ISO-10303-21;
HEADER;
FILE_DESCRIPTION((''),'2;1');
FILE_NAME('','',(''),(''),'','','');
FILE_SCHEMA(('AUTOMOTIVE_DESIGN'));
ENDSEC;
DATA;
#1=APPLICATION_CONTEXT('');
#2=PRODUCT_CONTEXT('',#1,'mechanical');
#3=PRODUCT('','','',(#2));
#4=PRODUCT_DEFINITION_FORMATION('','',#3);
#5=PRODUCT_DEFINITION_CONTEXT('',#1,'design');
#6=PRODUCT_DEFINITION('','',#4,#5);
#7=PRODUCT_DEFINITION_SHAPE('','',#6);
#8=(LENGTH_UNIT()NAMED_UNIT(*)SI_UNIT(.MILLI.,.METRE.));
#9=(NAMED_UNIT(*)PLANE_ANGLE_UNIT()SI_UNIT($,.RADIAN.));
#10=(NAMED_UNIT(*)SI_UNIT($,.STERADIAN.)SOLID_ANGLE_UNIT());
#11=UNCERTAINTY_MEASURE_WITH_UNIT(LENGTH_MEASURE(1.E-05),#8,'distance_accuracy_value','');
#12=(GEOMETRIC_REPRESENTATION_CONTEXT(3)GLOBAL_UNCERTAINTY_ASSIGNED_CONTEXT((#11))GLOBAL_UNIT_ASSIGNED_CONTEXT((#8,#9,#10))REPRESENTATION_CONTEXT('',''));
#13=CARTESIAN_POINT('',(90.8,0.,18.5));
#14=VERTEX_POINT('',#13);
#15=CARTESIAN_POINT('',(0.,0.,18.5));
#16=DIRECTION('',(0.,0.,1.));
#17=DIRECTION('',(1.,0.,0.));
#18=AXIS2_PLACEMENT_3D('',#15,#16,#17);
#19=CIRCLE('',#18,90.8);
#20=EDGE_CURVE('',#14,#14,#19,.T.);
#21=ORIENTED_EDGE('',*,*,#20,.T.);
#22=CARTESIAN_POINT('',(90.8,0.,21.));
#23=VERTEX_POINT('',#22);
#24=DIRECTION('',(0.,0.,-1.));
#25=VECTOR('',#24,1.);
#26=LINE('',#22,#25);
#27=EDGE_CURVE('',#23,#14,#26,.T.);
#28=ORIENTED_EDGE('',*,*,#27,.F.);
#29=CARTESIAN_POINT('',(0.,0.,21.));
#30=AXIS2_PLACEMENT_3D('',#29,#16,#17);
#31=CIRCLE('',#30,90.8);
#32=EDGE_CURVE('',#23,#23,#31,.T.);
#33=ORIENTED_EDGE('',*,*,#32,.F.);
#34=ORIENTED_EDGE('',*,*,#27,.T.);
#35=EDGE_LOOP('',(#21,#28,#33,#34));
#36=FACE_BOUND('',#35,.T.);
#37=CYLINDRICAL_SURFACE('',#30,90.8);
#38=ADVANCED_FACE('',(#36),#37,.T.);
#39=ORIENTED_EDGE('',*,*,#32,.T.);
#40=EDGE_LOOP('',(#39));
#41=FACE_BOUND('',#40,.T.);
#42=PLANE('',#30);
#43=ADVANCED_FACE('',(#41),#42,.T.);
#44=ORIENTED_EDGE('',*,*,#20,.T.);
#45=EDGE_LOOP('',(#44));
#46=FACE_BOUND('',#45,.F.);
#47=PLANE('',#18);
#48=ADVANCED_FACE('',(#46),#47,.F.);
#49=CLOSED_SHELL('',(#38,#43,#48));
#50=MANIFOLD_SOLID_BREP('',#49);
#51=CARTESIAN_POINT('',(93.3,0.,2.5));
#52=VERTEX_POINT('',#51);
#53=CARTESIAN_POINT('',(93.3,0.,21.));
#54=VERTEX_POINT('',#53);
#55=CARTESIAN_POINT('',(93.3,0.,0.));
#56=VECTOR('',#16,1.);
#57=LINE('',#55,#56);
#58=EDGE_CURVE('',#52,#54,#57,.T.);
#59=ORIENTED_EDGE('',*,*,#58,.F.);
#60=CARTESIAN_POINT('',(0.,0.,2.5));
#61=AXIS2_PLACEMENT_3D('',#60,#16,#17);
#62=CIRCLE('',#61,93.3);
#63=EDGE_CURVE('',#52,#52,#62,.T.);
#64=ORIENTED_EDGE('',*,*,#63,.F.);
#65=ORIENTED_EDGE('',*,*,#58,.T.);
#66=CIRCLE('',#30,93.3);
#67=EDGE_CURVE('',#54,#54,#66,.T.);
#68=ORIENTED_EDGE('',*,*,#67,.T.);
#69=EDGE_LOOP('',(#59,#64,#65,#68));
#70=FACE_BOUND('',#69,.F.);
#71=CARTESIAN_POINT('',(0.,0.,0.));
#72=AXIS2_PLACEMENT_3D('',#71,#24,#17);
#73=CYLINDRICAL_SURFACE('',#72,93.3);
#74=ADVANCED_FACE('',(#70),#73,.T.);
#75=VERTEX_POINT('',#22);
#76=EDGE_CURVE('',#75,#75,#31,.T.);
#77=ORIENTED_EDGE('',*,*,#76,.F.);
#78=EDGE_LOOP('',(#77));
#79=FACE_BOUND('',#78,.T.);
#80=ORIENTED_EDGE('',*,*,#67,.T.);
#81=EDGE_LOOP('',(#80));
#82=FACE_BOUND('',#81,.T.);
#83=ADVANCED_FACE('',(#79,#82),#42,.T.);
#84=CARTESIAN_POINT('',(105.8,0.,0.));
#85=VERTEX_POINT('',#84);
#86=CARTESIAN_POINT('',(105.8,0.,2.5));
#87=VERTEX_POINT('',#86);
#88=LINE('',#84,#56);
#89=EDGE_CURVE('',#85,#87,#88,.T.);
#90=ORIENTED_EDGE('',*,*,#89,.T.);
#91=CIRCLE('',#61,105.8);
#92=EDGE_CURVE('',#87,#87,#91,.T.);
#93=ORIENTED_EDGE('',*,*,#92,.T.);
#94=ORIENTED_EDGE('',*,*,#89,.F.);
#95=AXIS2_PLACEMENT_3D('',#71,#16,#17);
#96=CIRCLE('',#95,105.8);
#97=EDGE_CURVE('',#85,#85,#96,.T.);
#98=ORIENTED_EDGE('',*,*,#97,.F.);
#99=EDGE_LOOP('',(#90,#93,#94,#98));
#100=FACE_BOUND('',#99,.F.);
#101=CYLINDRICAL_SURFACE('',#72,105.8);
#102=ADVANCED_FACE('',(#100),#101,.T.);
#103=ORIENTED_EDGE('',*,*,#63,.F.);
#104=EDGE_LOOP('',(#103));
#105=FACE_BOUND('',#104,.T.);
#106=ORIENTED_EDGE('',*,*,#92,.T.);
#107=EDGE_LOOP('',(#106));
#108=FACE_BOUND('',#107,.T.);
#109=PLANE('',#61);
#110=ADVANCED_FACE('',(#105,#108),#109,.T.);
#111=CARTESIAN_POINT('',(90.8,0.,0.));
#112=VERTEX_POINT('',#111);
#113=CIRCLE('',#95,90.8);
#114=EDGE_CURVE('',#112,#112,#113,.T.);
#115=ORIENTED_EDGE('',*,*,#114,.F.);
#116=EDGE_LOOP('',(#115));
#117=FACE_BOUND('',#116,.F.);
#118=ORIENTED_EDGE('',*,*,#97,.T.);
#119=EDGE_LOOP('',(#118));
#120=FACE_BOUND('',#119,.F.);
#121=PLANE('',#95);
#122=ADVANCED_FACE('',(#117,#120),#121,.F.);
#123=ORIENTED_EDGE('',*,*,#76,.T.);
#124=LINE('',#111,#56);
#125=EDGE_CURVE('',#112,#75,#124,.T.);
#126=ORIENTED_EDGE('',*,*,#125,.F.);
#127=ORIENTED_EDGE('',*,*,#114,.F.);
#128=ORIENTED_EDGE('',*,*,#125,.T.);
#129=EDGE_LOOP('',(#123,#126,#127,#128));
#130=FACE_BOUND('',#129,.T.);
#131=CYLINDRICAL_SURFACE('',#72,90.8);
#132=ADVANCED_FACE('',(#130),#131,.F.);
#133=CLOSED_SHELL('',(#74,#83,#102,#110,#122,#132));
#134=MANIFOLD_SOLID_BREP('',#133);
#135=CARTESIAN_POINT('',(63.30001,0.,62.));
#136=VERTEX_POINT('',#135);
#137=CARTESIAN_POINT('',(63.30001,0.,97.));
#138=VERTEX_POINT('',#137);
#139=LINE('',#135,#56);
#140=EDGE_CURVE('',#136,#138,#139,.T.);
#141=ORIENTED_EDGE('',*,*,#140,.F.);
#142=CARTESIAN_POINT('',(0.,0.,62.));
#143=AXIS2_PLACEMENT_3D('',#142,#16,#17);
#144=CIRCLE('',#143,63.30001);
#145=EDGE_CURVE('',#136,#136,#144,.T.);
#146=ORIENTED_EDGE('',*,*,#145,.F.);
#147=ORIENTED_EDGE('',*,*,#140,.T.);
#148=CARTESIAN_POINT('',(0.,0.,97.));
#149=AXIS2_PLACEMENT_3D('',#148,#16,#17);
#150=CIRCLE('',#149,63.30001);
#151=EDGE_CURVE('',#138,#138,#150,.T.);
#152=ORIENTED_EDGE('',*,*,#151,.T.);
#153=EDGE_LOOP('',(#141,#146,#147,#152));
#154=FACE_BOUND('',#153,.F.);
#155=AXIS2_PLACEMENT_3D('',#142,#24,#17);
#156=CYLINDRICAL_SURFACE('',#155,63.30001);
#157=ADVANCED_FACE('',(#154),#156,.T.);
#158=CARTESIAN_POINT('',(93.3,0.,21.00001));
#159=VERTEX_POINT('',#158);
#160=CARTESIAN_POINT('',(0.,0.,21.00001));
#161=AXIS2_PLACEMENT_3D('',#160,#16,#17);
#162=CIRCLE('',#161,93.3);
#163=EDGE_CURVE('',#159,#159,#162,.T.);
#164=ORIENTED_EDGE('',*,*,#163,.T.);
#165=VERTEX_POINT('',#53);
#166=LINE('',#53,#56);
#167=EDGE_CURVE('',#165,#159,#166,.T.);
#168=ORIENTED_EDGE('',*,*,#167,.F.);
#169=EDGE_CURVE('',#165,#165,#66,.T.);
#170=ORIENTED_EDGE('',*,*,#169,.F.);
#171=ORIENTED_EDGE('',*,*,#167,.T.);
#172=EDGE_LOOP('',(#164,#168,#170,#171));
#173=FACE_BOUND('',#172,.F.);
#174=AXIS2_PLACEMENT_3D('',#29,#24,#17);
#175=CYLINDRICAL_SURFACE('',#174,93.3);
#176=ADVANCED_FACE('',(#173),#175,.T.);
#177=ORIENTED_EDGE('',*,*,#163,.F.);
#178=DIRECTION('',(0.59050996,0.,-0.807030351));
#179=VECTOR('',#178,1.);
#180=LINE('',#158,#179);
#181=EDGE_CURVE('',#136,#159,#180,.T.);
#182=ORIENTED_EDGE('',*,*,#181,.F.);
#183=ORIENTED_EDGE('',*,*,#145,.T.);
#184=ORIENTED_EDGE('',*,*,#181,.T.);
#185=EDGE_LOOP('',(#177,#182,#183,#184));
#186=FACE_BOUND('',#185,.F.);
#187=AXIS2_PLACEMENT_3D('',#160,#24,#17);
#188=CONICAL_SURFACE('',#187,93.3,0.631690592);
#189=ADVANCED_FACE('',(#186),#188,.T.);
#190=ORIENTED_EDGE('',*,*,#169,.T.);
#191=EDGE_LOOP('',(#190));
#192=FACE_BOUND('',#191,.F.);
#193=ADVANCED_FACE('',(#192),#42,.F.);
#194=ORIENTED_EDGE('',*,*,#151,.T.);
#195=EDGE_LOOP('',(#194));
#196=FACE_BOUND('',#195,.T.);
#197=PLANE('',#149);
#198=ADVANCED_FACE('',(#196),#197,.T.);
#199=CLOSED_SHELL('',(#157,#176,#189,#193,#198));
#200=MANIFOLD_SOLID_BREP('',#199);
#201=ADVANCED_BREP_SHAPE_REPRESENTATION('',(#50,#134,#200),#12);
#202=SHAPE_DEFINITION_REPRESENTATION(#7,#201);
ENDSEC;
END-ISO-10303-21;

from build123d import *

# Parameters (mm, degrees)
F0_R     = 93.3
F0_R_2   = 90.8
F1_DEPTH = 21
F0_R_3   = 105.8
F2_DEPTH = 2.5
F3_R     = 90.8
F4_DEPTH = 2.5
F3_R_2   = 93.3
F5_DEPTH = 41
F6_SIZE2 = 40.99999
F6_SIZE  = 29.99999
F7_DEPTH = 35


# Not quite as in the source:
# - a fillet or chamfer is up to 0.001 mm smaller than in the source, because OpenCascade refuses the exact size


with BuildPart() as f1:
    # F0 (on Top) → F1 (new body)
    with BuildSketch(Plane.XY):
        Circle(F0_R)
        Circle(F0_R_2, mode=Mode.SUBTRACT)
    extrude(amount=F1_DEPTH)

    # F0 (on Top) → F2 (join)
    with BuildSketch(Plane.XY):
        Circle(F0_R_3)
        Circle(F0_R, mode=Mode.SUBTRACT)
    extrude(amount=F2_DEPTH)


with BuildPart() as f4:
    # F3 (on face) → F4 (new body)
    with BuildSketch(Plane.XY.offset(21)):
        Circle(F3_R)
    extrude(amount=-F4_DEPTH)


with BuildPart() as f5:
    # F3 (on face) → F5 (new body)
    with BuildSketch(Plane.XY.offset(21)):
        Circle(F3_R_2)
        Circle(F3_R, mode=Mode.SUBTRACT)
        Circle(F3_R)
    extrude(amount=F5_DEPTH)

    # F6 (size 30 and 41 in the source; OpenCascade refuses exactly that, so slightly less here)
    f6_edges = [f5.edges().sort_by_distance(p)[0] for p in [
        (-93.3, 0, 62),
    ]]
    f6_side = f5.faces().sort_by_distance((0, 0, 62))[0]
    chamfer(f6_edges, length=F6_SIZE, length2=F6_SIZE2, reference=f6_side)

    # F7 (add): a face of the model
    f7_faces = [f5.faces().sort_by_distance(p)[0] for p in [
        (0, 0, 62),
    ]]
    extrude(f7_faces, amount=F7_DEPTH)


solid = Compound([f1.part, f4.part, f5.part])
